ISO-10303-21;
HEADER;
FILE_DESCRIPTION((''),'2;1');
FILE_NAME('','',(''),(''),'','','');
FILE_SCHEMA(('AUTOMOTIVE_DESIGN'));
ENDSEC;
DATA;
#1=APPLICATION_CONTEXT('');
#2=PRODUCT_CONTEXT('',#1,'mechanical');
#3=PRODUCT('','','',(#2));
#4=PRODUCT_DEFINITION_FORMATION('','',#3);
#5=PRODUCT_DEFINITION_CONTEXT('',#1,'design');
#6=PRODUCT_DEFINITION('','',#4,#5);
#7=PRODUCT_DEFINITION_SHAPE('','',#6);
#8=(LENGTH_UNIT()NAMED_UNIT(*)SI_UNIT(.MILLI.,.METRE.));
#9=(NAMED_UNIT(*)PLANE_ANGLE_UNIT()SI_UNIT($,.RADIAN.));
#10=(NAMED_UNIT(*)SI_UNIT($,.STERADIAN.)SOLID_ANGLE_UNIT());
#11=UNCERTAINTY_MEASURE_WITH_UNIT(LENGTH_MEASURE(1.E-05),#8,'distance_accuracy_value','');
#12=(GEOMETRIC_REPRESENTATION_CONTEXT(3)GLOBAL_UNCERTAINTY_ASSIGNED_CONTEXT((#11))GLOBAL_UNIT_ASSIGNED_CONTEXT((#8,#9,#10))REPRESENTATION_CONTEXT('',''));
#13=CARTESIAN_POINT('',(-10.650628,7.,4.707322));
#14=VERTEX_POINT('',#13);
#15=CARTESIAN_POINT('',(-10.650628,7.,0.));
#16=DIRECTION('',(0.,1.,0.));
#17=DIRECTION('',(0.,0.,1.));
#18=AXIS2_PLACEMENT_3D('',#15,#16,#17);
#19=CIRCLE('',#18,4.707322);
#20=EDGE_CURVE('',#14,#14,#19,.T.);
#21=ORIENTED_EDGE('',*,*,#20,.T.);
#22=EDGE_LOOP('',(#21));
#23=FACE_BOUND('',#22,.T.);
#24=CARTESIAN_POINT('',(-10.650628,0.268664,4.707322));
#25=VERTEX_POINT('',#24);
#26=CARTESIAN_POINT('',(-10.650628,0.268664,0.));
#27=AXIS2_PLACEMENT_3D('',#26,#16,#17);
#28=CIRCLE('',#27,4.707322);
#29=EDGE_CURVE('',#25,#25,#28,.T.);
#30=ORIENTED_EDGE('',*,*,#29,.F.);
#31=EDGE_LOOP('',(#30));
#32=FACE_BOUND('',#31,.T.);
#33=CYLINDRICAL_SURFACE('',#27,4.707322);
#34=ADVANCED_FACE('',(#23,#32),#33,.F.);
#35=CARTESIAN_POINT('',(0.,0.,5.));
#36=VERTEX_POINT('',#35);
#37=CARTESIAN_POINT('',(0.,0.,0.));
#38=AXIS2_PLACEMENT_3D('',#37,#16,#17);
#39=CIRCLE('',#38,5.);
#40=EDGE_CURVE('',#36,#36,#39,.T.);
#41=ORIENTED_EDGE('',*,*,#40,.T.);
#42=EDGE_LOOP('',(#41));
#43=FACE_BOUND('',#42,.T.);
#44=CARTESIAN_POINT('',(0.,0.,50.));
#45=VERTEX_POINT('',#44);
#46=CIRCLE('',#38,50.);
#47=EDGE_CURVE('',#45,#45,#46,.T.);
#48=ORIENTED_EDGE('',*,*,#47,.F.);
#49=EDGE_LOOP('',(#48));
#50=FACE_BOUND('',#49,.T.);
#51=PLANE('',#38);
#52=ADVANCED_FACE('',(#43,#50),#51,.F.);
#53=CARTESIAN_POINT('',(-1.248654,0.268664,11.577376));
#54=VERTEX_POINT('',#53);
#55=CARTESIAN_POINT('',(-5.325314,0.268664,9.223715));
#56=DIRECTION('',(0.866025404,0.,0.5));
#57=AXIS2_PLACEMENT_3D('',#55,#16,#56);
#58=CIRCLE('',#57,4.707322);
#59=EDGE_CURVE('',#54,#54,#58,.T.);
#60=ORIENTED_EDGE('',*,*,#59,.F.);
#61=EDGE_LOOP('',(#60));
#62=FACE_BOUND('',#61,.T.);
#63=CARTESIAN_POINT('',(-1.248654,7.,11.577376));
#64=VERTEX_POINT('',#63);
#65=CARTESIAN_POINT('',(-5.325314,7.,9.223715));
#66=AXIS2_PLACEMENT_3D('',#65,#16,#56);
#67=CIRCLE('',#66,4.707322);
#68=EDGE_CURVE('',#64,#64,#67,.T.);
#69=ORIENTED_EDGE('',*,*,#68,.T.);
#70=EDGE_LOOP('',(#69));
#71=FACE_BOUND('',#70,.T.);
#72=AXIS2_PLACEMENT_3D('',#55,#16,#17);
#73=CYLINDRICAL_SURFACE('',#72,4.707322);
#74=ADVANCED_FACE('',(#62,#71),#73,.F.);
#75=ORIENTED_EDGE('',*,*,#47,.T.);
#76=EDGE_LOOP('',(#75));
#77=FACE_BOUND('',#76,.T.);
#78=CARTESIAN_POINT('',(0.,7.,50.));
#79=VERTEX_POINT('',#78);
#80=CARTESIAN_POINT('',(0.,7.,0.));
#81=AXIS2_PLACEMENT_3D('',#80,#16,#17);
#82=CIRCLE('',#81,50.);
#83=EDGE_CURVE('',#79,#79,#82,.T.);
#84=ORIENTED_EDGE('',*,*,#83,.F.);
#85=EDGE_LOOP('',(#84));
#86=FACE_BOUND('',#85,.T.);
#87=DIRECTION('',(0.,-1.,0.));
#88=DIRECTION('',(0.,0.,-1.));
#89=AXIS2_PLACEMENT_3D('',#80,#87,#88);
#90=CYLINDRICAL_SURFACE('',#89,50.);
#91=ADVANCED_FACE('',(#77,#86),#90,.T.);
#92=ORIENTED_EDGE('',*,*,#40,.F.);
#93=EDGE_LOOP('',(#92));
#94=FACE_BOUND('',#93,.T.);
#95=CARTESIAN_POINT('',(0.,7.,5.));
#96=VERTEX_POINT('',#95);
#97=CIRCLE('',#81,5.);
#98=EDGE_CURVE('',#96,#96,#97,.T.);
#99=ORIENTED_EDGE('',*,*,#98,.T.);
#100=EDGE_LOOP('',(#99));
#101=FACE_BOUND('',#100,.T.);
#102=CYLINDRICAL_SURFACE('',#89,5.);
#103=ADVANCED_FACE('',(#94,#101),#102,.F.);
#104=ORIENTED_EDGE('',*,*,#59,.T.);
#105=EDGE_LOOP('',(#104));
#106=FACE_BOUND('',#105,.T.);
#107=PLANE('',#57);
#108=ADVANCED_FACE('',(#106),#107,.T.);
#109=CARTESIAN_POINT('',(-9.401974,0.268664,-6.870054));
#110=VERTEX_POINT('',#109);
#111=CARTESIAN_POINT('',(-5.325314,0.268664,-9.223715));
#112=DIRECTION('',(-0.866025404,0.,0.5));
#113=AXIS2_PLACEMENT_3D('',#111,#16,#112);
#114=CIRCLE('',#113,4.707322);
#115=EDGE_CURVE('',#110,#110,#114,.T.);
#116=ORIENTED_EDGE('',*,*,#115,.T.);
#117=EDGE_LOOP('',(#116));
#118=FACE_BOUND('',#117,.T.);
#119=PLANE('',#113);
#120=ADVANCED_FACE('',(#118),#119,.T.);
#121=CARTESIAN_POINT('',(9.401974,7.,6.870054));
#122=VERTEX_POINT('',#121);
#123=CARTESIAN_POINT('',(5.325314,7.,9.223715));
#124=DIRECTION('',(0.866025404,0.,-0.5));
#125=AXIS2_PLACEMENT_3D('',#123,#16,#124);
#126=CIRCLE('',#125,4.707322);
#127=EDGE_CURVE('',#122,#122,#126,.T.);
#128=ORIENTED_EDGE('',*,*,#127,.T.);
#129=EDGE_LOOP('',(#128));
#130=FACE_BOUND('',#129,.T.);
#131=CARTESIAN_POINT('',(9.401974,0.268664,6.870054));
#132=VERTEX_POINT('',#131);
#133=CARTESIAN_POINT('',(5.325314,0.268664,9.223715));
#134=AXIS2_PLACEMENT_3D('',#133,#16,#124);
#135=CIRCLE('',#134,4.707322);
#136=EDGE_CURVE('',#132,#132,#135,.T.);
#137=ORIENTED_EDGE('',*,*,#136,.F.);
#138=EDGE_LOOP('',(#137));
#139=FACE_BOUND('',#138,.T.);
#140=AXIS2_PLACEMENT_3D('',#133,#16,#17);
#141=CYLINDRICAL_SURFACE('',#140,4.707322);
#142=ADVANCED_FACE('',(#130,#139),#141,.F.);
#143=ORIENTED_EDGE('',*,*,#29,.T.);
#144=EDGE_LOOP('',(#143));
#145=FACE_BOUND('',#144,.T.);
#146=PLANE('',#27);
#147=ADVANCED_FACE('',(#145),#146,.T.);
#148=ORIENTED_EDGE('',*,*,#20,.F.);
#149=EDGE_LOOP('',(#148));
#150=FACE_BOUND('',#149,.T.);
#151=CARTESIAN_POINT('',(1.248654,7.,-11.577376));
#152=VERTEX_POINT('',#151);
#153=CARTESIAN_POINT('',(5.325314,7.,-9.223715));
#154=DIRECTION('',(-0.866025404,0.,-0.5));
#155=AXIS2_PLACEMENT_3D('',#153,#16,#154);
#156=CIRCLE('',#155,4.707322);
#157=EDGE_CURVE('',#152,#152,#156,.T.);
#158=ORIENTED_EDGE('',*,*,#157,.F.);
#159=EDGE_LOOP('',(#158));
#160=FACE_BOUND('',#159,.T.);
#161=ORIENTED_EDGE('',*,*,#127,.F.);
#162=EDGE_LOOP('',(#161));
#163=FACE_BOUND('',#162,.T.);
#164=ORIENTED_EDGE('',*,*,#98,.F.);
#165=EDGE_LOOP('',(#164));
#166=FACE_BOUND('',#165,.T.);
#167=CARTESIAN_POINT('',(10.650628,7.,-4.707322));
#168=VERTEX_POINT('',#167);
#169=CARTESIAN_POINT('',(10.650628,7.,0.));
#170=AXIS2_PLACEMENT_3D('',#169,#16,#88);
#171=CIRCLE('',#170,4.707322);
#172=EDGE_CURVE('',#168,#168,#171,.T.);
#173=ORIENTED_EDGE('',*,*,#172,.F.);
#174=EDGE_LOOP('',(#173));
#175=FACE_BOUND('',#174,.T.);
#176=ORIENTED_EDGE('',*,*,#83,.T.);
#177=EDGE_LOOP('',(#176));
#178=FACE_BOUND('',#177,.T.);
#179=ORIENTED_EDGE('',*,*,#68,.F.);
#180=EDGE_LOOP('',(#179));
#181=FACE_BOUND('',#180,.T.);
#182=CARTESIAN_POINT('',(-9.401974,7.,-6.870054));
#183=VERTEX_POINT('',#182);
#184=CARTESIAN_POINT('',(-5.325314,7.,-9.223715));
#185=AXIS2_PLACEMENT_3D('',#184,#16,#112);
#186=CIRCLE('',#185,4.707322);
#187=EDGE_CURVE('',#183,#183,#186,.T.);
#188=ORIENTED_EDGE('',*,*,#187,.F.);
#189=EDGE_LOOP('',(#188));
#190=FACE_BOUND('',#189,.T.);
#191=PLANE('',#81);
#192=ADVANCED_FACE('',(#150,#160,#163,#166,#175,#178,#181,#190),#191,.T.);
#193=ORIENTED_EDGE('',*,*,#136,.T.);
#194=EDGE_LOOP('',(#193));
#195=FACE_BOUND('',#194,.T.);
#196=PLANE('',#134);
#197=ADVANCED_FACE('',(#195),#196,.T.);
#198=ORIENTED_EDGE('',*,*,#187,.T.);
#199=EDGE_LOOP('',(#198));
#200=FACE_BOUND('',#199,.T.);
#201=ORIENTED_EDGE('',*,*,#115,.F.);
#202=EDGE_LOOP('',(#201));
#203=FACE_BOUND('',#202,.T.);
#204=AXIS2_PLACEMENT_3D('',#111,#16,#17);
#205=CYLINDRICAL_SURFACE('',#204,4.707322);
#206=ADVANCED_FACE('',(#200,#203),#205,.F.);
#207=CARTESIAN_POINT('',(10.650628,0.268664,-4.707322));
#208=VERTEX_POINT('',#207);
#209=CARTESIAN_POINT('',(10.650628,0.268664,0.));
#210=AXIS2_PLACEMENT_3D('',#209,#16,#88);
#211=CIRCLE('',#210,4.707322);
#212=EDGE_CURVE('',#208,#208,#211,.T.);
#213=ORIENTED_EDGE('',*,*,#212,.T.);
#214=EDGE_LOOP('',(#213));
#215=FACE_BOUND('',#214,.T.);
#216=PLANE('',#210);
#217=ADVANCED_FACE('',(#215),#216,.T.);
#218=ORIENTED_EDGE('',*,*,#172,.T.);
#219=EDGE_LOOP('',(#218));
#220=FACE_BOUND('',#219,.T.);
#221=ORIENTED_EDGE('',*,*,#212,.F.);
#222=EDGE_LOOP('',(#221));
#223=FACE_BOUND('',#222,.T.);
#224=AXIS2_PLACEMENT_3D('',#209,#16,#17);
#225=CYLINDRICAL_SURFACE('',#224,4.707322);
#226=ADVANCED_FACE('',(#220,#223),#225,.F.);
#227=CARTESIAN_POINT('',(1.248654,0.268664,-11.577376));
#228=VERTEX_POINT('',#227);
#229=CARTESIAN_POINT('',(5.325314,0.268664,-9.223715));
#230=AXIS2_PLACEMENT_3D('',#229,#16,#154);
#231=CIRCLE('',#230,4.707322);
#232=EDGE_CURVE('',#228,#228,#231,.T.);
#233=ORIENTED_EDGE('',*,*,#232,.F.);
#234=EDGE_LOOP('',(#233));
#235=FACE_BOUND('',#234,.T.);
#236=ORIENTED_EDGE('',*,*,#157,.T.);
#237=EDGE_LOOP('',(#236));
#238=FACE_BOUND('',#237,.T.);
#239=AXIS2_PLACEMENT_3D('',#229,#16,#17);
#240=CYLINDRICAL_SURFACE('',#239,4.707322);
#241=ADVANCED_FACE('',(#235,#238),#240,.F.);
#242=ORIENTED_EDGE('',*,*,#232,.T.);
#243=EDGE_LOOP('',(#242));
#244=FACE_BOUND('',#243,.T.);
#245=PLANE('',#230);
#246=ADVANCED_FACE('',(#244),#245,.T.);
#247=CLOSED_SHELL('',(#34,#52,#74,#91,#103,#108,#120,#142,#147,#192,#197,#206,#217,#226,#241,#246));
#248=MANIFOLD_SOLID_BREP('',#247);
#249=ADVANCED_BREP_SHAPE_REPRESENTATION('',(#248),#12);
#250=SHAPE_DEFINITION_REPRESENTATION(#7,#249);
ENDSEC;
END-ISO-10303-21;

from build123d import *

# Parameters (mm, degrees)
SKETCH1_R           = 50
BOSS_EXTRUDE1_DEPTH = 7
SKETCH2_R           = 5
CUT_EXTRUDE1_DEPTH  = 72.056315694
SKETCH3_R           = 4.707321815
CUT_EXTRUDE2_DEPTH  = 6.731336382
CIRPATTERN1_COUNT   = 6


with BuildPart() as part:
    # Sketch1 → Boss-Extrude1 (new body)
    with BuildSketch(Plane(origin=(0, 0, 0), x_dir=(1, 0, 0), z_dir=(0, 1, 0))):
        Circle(SKETCH1_R)
    extrude(amount=BOSS_EXTRUDE1_DEPTH)

    # Sketch2 → Cut-Extrude1 (cut, through all)
    with BuildSketch(Plane(origin=(0, 0, 0), x_dir=(1, 0, 0), z_dir=(0, 1, 0))):
        Circle(SKETCH2_R)
    extrude(amount=CUT_EXTRUDE1_DEPTH, mode=Mode.SUBTRACT)

    # Sketch3 → Cut-Extrude2 (cut)
    with BuildSketch(Plane(origin=(0, 7, 0), x_dir=(1, 0, 0), z_dir=(0, 1, 0))):
        with Locations((-10.650628421, 0)):
            Circle(SKETCH3_R)
    cut_extrude2 = extrude(amount=-CUT_EXTRUDE2_DEPTH, mode=Mode.SUBTRACT)

    # CirPattern1: Cut-Extrude2 ×6 about axis
    cirpattern1_axis = Axis((0, 0, 0), (0, 1, 0))
    for i in range(1, CIRPATTERN1_COUNT):
        add(cut_extrude2.rotate(cirpattern1_axis, i * 360 / CIRPATTERN1_COUNT), mode=Mode.SUBTRACT)


solid = part.part
